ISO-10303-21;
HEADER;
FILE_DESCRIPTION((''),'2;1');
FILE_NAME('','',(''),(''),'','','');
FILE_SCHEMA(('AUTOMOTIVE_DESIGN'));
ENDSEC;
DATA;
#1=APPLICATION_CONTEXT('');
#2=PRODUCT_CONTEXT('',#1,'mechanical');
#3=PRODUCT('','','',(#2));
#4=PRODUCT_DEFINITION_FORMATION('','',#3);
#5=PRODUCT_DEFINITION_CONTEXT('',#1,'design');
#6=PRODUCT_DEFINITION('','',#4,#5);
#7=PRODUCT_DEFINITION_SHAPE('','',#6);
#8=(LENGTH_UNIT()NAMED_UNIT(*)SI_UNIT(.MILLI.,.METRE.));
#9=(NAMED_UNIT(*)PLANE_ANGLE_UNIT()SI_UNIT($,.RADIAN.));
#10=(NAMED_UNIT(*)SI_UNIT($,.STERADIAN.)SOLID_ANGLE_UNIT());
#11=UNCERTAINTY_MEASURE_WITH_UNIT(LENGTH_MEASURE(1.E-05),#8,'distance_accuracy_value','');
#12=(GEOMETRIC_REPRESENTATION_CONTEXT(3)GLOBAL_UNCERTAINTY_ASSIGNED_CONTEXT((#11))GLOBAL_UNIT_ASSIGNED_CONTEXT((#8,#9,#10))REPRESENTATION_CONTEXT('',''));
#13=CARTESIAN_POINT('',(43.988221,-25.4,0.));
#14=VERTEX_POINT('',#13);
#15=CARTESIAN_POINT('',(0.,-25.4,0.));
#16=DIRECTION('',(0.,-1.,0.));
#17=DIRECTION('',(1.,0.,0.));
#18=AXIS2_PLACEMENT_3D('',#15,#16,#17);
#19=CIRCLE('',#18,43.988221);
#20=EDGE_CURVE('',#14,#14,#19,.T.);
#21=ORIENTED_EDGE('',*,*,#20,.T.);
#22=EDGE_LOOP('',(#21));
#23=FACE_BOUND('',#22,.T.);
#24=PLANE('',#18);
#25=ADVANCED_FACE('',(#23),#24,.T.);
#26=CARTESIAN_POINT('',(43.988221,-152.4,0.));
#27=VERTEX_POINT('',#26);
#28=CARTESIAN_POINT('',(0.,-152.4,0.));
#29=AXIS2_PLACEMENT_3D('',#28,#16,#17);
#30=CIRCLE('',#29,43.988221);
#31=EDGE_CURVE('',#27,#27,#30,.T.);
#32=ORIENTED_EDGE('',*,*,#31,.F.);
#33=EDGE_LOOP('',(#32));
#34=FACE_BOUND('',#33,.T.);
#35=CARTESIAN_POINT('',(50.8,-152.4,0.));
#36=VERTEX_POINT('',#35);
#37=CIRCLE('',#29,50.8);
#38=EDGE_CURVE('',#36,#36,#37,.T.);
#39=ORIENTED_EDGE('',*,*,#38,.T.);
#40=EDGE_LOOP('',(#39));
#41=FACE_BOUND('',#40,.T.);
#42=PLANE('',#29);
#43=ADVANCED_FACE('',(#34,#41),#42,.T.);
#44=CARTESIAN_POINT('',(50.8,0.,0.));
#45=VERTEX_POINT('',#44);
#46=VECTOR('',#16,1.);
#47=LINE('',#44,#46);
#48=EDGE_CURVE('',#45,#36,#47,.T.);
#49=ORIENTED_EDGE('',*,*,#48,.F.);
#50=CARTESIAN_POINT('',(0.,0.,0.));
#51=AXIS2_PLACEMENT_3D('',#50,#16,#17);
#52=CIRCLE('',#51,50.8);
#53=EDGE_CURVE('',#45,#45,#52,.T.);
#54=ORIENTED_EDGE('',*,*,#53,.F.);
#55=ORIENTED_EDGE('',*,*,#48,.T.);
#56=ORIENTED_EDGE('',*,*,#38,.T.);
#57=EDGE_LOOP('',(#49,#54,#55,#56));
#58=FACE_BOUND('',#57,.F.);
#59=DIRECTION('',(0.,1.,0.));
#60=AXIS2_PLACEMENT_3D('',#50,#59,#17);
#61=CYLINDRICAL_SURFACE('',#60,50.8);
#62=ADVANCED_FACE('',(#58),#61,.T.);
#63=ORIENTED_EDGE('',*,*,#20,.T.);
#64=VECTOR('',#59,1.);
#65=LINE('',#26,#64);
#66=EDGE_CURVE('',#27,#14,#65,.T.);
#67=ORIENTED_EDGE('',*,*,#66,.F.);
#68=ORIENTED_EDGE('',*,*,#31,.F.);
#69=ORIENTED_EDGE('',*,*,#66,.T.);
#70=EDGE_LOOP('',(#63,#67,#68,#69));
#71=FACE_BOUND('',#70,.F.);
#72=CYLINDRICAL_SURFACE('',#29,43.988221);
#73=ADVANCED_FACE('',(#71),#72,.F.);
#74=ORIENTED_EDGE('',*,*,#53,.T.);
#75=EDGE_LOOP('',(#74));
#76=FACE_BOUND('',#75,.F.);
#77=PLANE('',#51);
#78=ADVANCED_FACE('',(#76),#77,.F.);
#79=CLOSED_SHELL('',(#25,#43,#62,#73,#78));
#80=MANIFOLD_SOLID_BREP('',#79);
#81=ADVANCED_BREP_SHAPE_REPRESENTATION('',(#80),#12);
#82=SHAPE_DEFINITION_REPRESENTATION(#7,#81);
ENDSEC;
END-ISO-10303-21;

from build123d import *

# Parameters (mm, degrees)
F0_R     = 50.8
F1_DEPTH = 152.4
F2_R     = 43.9882205893
F3_DEPTH = 127


# Not quite as in the source:
# - a feature names something its author has since deleted; it is built from what else it names


with BuildPart() as f1:
    # F0 (on Front) → F1 (new body)
    with BuildSketch(Plane.XZ):
        Circle(F0_R)
    extrude(amount=F1_DEPTH)

    # F2 (on face) → F3 (cut)
    with BuildSketch(Plane.XZ.offset(152.4)):
        Circle(F2_R)
    extrude(amount=-F3_DEPTH, mode=Mode.SUBTRACT)


solid = f1.part
